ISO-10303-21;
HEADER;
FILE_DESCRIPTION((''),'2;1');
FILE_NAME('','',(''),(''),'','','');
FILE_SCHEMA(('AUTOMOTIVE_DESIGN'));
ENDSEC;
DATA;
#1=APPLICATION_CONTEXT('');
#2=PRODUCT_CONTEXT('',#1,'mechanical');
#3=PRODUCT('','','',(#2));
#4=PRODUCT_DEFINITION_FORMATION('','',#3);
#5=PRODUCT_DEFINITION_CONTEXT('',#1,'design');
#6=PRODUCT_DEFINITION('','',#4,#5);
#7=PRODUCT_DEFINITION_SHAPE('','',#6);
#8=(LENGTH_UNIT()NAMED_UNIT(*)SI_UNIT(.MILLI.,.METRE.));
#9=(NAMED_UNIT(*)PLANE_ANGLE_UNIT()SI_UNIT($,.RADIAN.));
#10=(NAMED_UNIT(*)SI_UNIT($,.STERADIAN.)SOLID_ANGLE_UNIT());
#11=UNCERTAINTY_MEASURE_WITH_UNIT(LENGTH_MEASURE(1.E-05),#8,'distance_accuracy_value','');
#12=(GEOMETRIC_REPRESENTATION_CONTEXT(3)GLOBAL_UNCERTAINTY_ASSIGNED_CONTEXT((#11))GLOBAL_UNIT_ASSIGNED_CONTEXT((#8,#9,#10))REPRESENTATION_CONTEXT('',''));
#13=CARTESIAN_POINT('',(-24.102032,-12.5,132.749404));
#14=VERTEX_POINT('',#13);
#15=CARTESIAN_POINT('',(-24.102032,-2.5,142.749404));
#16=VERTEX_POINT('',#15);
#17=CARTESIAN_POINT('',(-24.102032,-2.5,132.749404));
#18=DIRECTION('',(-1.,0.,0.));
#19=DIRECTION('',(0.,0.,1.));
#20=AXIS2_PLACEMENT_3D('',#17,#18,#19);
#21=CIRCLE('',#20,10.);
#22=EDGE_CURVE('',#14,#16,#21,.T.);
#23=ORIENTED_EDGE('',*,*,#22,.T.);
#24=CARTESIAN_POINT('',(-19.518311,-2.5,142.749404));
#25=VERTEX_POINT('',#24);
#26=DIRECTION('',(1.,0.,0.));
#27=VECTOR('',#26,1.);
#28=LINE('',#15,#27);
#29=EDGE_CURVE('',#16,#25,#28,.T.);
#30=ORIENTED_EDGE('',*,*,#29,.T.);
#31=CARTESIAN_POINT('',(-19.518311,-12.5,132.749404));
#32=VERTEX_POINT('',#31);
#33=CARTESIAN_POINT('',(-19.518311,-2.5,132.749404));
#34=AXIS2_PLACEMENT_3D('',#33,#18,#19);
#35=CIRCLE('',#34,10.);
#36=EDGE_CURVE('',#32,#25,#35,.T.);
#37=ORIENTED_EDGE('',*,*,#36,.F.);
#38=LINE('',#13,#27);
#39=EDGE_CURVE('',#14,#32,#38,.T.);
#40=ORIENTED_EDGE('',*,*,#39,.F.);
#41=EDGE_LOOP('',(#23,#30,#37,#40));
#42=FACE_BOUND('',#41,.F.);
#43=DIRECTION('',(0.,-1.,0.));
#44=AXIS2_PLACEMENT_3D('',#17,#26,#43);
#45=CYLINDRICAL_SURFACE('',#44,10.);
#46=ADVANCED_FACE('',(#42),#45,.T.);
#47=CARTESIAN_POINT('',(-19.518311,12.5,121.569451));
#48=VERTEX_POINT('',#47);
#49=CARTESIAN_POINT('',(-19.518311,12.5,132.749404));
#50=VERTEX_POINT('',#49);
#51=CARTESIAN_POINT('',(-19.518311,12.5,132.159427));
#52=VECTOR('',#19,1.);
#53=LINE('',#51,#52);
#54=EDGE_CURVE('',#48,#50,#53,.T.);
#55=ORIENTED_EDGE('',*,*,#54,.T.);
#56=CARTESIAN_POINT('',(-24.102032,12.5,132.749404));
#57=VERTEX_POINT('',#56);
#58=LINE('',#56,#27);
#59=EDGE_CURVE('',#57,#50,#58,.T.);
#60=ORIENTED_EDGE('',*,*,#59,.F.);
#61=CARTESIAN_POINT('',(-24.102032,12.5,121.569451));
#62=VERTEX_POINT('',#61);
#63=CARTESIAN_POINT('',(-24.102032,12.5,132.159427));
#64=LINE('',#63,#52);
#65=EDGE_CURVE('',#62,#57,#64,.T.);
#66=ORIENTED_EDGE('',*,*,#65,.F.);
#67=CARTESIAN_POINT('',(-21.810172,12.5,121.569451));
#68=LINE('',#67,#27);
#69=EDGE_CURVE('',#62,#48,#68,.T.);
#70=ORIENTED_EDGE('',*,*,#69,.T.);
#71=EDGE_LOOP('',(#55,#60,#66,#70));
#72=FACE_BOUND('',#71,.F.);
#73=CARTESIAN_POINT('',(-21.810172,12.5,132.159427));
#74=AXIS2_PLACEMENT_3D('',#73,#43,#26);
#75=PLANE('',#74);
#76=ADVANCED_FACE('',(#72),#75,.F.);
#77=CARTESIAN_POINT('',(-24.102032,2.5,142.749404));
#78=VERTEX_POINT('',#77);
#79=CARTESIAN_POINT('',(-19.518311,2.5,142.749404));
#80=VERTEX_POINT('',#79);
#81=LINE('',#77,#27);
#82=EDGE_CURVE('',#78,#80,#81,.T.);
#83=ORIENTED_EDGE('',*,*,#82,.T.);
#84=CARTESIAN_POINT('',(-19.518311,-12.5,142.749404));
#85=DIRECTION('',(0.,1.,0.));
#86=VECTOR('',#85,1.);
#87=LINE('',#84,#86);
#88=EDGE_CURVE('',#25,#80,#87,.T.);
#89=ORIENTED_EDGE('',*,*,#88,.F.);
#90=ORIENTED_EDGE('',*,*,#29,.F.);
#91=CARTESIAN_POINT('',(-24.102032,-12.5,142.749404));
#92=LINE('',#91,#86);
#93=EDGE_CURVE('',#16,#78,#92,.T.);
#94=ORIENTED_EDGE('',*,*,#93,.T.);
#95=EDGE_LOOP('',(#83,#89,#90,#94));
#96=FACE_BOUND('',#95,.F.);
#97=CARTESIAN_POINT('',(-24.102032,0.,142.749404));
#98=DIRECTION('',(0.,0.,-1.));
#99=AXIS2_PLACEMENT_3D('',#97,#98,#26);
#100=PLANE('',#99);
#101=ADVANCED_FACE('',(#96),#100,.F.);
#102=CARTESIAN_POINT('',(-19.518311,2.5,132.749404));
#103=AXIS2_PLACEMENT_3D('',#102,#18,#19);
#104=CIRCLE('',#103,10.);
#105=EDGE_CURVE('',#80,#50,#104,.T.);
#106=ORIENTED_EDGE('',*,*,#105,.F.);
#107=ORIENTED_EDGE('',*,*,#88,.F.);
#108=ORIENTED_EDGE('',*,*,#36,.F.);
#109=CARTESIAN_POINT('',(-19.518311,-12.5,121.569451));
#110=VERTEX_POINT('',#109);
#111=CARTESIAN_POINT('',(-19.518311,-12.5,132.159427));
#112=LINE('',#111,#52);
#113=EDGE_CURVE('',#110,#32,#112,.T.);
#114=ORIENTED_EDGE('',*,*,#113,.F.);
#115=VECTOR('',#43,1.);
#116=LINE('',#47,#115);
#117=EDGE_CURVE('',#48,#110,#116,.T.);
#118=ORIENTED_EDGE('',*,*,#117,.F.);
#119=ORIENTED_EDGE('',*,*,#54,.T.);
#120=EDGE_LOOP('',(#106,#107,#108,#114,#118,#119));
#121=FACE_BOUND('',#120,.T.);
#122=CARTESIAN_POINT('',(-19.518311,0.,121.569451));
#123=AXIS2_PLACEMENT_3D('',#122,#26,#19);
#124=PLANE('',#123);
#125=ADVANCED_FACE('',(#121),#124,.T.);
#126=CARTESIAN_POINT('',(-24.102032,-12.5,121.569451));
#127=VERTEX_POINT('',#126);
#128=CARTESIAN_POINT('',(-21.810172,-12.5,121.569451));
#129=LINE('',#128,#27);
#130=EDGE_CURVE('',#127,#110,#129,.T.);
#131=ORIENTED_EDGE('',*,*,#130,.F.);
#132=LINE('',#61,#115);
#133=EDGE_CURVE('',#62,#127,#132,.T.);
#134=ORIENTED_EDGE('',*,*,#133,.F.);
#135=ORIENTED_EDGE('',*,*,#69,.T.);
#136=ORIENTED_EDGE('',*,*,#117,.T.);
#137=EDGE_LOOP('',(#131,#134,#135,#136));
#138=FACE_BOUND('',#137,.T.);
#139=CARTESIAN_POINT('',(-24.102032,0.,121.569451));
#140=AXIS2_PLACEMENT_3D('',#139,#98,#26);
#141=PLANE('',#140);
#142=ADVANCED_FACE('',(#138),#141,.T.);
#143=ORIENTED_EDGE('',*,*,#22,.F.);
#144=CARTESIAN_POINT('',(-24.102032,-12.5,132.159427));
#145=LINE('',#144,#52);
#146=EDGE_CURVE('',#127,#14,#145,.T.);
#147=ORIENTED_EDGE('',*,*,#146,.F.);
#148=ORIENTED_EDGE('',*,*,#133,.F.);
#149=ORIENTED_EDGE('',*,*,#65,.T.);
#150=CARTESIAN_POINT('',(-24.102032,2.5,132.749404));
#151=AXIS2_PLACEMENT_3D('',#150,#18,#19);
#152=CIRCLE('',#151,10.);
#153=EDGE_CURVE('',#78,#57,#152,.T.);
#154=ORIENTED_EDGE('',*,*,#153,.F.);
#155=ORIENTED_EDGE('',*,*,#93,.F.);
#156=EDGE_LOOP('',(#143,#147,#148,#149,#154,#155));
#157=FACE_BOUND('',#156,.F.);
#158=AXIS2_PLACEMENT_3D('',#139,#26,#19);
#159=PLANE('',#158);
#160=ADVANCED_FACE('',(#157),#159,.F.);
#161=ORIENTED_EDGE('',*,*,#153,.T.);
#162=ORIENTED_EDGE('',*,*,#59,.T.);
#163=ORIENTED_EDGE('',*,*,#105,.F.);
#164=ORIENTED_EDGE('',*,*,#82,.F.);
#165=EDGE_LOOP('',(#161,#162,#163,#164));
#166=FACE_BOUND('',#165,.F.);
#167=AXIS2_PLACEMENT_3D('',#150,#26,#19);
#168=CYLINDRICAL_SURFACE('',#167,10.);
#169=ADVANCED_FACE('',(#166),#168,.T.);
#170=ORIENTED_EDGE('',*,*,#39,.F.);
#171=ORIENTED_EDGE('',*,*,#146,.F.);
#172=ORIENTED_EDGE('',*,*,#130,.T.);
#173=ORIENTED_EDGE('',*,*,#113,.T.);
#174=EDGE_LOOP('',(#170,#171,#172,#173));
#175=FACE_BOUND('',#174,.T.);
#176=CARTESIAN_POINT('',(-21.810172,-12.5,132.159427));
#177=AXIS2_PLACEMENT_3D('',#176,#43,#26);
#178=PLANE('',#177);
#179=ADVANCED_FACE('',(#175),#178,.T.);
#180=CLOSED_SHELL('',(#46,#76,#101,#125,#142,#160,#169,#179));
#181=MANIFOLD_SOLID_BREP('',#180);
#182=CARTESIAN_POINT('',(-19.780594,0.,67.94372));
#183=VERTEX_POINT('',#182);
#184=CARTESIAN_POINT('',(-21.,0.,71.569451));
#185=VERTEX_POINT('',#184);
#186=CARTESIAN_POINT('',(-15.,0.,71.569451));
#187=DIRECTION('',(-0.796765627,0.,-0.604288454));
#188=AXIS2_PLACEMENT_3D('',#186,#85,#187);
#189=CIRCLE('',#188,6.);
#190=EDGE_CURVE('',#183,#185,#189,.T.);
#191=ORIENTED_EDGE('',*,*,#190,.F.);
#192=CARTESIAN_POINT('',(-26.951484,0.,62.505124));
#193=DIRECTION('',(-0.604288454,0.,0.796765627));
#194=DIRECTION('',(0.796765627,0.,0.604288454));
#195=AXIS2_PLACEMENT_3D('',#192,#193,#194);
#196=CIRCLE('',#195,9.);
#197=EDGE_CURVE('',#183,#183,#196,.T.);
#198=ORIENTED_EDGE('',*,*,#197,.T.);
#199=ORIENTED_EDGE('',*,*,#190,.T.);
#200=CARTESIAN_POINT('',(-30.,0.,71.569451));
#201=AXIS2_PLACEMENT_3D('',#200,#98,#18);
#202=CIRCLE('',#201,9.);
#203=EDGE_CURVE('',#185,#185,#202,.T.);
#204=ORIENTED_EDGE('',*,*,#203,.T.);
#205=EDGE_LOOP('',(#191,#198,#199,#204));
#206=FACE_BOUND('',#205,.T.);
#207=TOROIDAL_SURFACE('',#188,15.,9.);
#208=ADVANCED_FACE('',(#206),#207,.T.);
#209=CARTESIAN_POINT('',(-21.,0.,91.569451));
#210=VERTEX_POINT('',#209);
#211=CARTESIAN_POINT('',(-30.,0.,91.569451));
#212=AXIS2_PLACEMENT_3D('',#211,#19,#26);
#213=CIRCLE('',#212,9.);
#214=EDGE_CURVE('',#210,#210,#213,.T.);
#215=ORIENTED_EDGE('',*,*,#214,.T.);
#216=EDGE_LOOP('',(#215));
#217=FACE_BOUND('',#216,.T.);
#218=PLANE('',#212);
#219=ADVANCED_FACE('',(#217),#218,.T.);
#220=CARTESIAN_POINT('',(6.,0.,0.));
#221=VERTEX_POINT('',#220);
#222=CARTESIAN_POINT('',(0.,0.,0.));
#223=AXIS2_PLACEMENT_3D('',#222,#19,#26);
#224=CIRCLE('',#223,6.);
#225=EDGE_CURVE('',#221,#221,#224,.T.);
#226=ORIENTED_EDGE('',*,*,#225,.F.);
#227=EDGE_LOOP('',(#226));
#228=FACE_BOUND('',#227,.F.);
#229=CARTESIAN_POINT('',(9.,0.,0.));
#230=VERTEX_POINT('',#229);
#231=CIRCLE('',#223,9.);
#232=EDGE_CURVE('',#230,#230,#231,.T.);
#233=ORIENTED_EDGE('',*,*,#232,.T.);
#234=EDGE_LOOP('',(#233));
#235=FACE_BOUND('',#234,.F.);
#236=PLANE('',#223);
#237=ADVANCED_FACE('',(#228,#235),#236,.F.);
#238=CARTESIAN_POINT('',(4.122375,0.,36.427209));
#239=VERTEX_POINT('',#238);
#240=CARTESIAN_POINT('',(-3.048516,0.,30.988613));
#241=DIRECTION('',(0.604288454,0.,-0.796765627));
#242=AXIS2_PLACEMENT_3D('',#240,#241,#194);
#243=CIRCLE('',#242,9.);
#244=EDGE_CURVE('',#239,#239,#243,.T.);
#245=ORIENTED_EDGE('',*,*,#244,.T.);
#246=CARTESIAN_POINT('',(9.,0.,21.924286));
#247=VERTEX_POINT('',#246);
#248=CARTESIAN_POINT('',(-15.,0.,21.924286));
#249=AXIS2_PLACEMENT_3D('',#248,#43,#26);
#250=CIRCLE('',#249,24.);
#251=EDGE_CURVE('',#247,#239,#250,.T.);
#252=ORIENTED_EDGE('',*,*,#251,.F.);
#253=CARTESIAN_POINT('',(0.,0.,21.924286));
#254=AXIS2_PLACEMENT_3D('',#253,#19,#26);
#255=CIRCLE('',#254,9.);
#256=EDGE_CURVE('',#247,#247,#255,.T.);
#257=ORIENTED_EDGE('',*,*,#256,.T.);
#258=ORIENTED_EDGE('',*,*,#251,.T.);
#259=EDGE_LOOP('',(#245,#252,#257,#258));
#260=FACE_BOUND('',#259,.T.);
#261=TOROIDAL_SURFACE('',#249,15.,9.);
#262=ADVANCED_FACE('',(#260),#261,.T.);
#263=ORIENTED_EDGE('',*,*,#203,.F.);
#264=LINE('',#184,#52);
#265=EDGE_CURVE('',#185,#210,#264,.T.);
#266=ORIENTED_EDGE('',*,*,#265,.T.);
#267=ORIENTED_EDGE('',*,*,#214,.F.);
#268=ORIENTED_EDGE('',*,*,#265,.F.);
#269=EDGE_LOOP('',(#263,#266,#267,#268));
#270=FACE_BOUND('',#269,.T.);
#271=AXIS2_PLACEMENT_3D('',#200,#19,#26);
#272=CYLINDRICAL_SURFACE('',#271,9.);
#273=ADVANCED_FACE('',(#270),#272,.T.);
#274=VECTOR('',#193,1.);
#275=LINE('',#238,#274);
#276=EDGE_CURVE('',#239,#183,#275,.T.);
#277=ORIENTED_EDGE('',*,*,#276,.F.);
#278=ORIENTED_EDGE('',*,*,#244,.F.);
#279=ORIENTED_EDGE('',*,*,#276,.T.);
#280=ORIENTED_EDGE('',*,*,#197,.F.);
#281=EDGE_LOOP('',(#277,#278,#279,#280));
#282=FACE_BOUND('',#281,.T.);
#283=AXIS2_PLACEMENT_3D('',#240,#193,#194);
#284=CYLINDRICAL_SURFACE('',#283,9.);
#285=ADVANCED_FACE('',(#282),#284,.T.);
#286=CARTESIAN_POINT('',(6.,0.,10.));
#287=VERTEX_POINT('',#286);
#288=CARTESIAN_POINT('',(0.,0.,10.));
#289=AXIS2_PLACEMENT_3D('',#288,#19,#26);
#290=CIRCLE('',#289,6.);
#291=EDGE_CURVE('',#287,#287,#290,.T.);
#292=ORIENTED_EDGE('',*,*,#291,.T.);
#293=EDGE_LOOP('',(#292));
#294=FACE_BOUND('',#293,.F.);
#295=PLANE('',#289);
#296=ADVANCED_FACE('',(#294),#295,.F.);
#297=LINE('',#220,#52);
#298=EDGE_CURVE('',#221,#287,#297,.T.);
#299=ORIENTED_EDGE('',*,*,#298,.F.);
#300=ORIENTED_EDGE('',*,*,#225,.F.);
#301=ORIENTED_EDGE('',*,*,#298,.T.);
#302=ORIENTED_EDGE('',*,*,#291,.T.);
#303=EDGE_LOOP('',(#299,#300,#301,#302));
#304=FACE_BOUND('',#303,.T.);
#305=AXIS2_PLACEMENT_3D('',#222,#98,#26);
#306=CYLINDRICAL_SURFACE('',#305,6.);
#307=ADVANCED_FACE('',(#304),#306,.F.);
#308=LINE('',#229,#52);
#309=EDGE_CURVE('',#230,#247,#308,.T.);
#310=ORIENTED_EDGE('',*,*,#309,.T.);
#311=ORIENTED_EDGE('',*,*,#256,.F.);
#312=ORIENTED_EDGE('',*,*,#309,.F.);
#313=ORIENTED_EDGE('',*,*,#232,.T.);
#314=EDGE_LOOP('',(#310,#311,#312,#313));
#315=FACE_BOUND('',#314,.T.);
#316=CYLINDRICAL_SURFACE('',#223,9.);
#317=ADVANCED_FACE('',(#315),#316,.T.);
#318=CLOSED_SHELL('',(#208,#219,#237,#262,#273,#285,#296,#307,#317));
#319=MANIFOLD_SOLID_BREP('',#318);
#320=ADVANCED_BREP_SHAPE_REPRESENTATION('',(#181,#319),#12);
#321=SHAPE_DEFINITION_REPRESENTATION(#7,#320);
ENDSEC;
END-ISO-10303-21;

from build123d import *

# Parameters (mm, degrees)
F0_R      = 9
F3_W      = 4.5837214408
F3_H      = 21.1799524822
F4_DEPTH  = 12.5
F8_R      = 6
F9_DEPTH  = 10
F10_R     = 5.88688452
F11_DEPTH = 25
F12_R     = 10


# Not quite as in the source:
# - the program builds the solid bodies; features that only make, move or delete a surface that nothing else refers to are left out


with BuildPart() as f2:
    # F2: sweep along a path in F1
    with BuildLine(Plane.XZ) as f2_path:
        Line((0, 0), (0, 21.9242861825))
        ThreePointArc((0, 21.9242861825), (-0.7825412605, 26.7059037947), (-3.0485155987, 30.9886129972))
        Line((-3.0485155987, 30.9886129972), (-26.9514844013, 62.505124331))
        ThreePointArc((-26.9514844013, 62.505124331), (-29.2174587395, 66.7878335335), (-30, 71.5694511458))
        Line((-30, 71.5694511458), (-30, 91.5694511458))
    # F0 (on Top) → F2 (sweep)
    with BuildSketch(Plane.XY):
        Circle(F0_R)
    sweep(path=f2_path.line)

    # F8 (on Top) → F9 (cut)
    with BuildSketch(Plane.XY):
        Circle(F8_R)
    extrude(amount=F9_DEPTH, mode=Mode.SUBTRACT)

    # F10 (on face) → F11 (cut)
    with BuildSketch(Plane.YZ.offset(-19.5183108238)):
        with Locations((0, 164.4262522459)):
            Circle(F10_R)
    extrude(amount=-F11_DEPTH, mode=Mode.SUBTRACT)


with BuildPart() as f4:
    # F3 (on Front) → F4 (new body, symmetric)
    with BuildSketch(Plane.XZ):
        with Locations((-21.8101715442, 132.1594273869)):
            Rectangle(F3_W, F3_H)
    extrude(amount=F4_DEPTH, both=True)

    # F12
    f12_edges = [f4.edges().sort_by_distance(p)[0] for p in [
        (-21.810172, -12.5, 142.749404),
        (-21.810172, 12.5, 142.749404),
    ]]
    fillet(f12_edges, radius=F12_R)


solid = Compound([f2.part, f4.part])
